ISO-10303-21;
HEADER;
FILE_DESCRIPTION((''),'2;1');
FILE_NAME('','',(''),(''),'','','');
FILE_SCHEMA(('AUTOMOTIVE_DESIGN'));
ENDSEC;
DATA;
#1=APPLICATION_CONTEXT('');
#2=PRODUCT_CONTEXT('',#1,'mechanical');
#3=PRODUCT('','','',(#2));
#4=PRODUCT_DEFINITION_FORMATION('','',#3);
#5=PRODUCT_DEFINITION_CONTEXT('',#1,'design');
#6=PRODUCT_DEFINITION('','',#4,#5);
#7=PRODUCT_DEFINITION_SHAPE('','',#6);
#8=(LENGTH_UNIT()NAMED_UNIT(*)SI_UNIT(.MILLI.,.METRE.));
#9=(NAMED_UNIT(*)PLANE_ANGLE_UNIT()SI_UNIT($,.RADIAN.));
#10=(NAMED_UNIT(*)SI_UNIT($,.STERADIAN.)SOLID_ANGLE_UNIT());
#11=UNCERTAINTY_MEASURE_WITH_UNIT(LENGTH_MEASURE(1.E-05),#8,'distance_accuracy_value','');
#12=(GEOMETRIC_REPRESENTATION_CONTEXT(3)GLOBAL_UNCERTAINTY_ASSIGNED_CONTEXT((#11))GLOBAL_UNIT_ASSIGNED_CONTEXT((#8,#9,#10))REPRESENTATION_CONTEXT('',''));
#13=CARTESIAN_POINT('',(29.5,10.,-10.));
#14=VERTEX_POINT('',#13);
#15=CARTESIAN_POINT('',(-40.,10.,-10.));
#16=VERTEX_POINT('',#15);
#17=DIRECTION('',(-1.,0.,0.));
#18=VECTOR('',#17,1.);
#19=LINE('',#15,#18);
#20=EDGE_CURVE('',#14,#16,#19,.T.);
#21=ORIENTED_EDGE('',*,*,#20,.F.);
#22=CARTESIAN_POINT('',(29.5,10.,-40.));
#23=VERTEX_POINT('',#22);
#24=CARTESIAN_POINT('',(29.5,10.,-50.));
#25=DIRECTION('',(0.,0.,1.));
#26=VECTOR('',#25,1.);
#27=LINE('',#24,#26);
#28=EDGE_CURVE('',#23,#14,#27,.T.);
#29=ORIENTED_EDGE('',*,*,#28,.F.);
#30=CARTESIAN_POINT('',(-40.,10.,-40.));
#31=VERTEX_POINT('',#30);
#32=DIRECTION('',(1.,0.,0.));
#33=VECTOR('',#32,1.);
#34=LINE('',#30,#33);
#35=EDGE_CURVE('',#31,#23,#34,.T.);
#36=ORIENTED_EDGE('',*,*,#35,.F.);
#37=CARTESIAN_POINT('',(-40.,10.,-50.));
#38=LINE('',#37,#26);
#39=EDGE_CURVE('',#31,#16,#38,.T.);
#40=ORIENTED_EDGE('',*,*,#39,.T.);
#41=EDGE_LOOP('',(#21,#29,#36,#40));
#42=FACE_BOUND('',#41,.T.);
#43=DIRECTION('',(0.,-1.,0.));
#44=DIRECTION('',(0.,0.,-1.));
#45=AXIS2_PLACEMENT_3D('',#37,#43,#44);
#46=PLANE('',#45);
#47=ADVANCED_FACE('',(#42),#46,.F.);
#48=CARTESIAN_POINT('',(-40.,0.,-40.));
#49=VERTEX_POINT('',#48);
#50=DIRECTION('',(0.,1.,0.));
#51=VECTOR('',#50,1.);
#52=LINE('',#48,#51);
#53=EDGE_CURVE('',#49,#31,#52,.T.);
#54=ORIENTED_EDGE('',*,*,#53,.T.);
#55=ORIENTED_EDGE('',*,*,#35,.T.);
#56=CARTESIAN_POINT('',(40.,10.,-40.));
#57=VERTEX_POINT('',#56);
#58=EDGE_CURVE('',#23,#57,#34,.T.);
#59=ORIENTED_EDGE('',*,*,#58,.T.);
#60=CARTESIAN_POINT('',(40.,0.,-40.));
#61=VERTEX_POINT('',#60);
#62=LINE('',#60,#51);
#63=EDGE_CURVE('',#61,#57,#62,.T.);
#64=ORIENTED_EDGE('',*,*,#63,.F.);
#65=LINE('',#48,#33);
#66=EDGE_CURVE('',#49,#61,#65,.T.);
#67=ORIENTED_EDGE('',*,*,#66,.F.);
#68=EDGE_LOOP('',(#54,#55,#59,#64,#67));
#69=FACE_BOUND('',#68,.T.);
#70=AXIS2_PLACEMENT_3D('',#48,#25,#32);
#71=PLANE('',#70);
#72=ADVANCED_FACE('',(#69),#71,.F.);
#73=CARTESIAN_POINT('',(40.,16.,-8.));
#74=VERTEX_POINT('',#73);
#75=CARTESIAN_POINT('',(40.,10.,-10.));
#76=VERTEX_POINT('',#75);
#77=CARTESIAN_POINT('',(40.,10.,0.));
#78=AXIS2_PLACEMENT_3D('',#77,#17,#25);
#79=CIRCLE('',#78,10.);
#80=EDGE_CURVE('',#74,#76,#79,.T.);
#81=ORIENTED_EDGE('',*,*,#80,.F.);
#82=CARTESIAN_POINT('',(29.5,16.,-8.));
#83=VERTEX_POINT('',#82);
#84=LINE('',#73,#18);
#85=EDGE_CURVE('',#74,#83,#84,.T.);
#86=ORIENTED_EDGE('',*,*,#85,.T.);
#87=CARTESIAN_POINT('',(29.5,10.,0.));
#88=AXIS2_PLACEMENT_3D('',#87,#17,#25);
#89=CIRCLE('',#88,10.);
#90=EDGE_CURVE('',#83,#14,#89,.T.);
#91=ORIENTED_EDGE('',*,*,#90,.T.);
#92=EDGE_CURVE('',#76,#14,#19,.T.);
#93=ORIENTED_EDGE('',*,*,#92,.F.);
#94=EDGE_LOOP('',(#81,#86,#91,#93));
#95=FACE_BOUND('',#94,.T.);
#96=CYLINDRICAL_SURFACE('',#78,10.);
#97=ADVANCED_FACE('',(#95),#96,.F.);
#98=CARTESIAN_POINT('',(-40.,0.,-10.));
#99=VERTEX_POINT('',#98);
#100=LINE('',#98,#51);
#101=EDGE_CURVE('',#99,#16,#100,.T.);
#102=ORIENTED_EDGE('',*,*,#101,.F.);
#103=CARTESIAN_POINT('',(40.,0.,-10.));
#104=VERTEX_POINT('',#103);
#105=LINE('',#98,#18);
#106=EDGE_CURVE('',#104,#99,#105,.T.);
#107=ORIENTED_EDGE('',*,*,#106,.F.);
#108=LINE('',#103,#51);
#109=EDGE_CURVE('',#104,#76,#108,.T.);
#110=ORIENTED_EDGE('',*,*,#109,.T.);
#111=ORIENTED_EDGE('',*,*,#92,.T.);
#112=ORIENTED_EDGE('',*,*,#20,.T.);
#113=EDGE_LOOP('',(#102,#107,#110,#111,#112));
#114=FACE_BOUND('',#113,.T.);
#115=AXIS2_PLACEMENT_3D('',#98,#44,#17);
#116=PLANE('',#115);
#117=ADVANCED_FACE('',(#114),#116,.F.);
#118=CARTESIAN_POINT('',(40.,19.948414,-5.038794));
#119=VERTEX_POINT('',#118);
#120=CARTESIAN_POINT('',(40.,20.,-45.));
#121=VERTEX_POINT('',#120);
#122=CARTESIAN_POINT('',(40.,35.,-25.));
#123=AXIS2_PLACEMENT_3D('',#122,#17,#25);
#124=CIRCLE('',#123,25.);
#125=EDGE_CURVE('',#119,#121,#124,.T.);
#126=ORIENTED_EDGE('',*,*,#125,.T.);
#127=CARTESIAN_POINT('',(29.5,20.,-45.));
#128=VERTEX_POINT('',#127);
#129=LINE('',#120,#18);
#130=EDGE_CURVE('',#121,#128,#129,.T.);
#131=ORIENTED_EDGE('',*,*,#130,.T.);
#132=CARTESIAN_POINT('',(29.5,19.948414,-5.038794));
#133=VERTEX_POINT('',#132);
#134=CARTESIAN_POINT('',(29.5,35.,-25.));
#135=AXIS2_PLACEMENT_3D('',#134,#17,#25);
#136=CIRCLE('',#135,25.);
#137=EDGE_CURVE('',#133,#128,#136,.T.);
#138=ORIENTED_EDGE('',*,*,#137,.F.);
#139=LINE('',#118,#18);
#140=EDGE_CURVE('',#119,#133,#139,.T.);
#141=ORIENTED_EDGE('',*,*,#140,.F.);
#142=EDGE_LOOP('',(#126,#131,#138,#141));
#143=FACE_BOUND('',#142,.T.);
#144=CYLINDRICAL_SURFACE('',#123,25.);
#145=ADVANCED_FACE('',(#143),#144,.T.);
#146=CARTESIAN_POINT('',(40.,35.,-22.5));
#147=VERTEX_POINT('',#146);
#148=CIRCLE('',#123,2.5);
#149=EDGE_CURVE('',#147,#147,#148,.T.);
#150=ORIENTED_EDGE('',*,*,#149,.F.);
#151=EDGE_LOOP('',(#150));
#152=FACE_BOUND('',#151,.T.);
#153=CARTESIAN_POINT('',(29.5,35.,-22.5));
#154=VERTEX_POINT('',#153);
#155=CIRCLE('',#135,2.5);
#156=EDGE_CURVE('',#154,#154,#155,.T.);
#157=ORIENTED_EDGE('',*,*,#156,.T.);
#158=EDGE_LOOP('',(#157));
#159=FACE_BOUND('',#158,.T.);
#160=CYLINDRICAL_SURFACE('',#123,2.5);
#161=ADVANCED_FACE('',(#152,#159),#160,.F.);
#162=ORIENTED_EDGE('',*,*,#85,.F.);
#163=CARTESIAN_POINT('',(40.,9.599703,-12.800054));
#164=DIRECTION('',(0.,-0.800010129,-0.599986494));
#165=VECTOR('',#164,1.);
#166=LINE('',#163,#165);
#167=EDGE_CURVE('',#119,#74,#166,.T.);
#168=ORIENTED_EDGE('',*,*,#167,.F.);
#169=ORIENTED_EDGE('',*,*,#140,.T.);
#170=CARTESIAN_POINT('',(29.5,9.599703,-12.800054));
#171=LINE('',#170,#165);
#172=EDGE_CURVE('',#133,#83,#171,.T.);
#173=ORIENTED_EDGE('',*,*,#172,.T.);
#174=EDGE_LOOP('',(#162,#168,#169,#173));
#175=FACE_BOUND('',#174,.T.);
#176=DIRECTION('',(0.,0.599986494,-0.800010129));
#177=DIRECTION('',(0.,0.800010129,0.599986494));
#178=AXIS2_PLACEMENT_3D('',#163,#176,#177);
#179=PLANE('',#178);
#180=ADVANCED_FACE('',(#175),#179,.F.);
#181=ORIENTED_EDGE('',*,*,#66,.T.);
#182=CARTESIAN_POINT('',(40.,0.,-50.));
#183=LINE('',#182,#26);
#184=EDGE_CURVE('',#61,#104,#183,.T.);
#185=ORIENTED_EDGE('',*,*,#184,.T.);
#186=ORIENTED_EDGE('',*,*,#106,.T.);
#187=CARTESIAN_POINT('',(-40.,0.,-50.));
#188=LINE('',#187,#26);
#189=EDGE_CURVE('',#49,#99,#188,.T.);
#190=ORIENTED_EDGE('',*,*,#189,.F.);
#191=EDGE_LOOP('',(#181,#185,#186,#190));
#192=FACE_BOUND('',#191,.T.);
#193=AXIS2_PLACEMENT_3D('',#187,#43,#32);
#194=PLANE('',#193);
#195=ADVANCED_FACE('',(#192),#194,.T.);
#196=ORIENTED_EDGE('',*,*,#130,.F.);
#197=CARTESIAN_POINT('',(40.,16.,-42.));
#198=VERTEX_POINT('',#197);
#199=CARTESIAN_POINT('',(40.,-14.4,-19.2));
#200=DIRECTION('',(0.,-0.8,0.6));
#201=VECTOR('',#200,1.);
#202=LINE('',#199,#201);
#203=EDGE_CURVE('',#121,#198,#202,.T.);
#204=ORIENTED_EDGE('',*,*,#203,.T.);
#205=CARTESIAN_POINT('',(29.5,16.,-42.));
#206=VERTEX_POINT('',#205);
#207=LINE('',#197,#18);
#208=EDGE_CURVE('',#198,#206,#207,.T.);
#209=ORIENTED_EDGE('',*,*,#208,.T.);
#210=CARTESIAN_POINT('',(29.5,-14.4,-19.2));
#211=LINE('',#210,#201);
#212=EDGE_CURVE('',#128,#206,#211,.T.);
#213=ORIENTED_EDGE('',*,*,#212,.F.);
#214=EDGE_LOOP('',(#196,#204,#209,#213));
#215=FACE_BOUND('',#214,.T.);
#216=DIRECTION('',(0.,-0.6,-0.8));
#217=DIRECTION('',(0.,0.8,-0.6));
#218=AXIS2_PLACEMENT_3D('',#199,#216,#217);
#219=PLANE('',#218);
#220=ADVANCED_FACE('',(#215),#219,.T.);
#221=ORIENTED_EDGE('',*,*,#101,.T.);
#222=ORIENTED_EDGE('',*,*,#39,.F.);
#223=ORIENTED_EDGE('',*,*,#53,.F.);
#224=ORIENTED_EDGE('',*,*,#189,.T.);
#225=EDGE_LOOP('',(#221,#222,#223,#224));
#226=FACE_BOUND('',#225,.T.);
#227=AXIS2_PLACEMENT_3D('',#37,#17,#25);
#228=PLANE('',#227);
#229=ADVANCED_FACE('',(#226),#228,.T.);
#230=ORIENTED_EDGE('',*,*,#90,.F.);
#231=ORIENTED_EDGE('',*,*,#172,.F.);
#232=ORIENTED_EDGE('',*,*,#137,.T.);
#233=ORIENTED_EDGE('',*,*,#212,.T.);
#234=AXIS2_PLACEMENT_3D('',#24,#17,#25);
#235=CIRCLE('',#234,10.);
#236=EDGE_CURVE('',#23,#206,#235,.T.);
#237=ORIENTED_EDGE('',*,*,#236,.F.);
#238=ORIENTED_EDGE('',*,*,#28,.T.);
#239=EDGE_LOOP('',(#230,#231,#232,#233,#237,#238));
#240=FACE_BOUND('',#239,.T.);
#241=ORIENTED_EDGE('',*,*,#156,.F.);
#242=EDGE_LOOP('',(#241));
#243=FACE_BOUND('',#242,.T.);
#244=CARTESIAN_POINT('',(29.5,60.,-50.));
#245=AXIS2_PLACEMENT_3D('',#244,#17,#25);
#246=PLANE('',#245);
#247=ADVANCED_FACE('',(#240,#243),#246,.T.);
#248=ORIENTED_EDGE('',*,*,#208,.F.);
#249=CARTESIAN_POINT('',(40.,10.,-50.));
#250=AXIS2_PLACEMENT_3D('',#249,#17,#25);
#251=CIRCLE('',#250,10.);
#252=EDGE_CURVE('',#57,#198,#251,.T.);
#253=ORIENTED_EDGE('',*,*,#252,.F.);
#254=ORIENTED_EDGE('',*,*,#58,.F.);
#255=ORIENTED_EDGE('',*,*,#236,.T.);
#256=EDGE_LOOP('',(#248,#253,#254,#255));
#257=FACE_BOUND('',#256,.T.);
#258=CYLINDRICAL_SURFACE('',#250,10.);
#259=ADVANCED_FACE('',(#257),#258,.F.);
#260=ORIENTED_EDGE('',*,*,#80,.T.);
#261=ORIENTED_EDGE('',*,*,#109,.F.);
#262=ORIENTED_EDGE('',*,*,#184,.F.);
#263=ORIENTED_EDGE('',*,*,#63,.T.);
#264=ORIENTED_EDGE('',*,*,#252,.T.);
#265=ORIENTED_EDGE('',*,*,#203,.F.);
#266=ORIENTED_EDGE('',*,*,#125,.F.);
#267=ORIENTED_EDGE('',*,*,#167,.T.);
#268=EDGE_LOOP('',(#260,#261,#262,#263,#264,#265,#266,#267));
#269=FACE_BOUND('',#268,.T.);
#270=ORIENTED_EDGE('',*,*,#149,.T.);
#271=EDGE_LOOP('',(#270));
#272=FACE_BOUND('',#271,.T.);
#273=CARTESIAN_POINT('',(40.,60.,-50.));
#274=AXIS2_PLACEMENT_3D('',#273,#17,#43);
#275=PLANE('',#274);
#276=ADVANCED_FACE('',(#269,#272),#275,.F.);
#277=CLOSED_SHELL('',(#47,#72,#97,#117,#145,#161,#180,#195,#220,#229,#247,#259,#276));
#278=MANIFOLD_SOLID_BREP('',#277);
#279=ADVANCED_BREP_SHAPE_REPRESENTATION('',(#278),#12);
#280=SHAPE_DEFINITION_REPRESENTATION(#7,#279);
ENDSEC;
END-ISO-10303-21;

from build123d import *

# Parameters (mm, degrees)
BOSS_EXTRUDE1_DEPTH = 50
CUT_EXTRUDE1_DEPTH  = 105.547835941
SKETCH3_R           = 2.5
CUT_EXTRUDE2_DEPTH  = 105.547835941
SKETCH4_W           = 80
SKETCH4_H           = 10
CUT_EXTRUDE3_DEPTH  = 82.240384046
CUT_EXTRUDE4_START  = -10.5
CUT_EXTRUDE4_DEPTH  = 10.5


# Read off the part's stored shape, not the designer's step: Cut-Extrude4
with BuildPart() as part:
    # Sketch1 → Boss-Extrude1 (new body)
    with BuildSketch(Plane.XY):
        Polygon((29.5, 60), (29.5, 10), (-40, 10), (-40, 0), (40, 0), (40, 60), align=None)
    extrude(amount=-BOSS_EXTRUDE1_DEPTH)

    # Sketch2 → Cut-Extrude1 (cut, through all)
    with BuildSketch(Plane.ZY.offset(-29.5)):
        with BuildLine():
            Line((-50, 60), (-50, 35))
            ThreePointArc((-50, 35), (-42.67766953, 52.67766953), (-25, 60))
            Line((-25, 60), (-50, 60))
        make_face()
        with BuildLine():
            Line((0, 60), (-25, 60))
            ThreePointArc((-25, 60), (-7.32233047, 52.67766953), (0, 35))
            Line((0, 35), (0, 60))
        make_face()
    extrude(amount=-CUT_EXTRUDE1_DEPTH, mode=Mode.SUBTRACT)

    # Sketch3 → Cut-Extrude2 (cut, through all)
    with BuildSketch(Plane.ZY.offset(-29.5)):
        with Locations((-25, 35)):
            Circle(SKETCH3_R)
    extrude(amount=-CUT_EXTRUDE2_DEPTH, mode=Mode.SUBTRACT)

    # Sketch4 → Cut-Extrude3 (cut, through all)
    with BuildSketch(Plane(origin=(0, 10, 0), x_dir=(1, 0, 0), z_dir=(0, 1, 0))):
        with Locations((0, 45)):
            Rectangle(SKETCH4_W, SKETCH4_H)
        with Locations((0, 5)):
            Rectangle(SKETCH4_W, SKETCH4_H)
    extrude(amount=-CUT_EXTRUDE3_DEPTH, mode=Mode.SUBTRACT)

    # Cut-Extrude4 outline → Cut-Extrude4 (cut)
    with BuildSketch(Plane.ZY.offset(-29.5).offset(CUT_EXTRUDE4_START)):
        with BuildLine():
            ThreePointArc((-45, 20), (-48.717082451, 27.09430585), (-50, 35))
            Line((-50, 35), (-50, 10))
            Line((-50, 10), (-40, 10))
            ThreePointArc((-40, 10), (-40.513167019, 13.16227766), (-42, 16))
            Line((-42, 16), (-45, 20))
        make_face()
        with BuildLine():
            ThreePointArc((0, 35), (-1.293142852, 27.063695813), (-5.038793932, 19.948413628))
            Line((-5.038793932, 19.948413628), (-8, 16))
            ThreePointArc((-8, 16), (-9.486832981, 13.16227766), (-10, 10))
            Line((-10, 10), (0, 10))
            Line((0, 10), (0, 35))
        make_face()
    extrude(amount=CUT_EXTRUDE4_DEPTH, mode=Mode.SUBTRACT)


solid = part.part
